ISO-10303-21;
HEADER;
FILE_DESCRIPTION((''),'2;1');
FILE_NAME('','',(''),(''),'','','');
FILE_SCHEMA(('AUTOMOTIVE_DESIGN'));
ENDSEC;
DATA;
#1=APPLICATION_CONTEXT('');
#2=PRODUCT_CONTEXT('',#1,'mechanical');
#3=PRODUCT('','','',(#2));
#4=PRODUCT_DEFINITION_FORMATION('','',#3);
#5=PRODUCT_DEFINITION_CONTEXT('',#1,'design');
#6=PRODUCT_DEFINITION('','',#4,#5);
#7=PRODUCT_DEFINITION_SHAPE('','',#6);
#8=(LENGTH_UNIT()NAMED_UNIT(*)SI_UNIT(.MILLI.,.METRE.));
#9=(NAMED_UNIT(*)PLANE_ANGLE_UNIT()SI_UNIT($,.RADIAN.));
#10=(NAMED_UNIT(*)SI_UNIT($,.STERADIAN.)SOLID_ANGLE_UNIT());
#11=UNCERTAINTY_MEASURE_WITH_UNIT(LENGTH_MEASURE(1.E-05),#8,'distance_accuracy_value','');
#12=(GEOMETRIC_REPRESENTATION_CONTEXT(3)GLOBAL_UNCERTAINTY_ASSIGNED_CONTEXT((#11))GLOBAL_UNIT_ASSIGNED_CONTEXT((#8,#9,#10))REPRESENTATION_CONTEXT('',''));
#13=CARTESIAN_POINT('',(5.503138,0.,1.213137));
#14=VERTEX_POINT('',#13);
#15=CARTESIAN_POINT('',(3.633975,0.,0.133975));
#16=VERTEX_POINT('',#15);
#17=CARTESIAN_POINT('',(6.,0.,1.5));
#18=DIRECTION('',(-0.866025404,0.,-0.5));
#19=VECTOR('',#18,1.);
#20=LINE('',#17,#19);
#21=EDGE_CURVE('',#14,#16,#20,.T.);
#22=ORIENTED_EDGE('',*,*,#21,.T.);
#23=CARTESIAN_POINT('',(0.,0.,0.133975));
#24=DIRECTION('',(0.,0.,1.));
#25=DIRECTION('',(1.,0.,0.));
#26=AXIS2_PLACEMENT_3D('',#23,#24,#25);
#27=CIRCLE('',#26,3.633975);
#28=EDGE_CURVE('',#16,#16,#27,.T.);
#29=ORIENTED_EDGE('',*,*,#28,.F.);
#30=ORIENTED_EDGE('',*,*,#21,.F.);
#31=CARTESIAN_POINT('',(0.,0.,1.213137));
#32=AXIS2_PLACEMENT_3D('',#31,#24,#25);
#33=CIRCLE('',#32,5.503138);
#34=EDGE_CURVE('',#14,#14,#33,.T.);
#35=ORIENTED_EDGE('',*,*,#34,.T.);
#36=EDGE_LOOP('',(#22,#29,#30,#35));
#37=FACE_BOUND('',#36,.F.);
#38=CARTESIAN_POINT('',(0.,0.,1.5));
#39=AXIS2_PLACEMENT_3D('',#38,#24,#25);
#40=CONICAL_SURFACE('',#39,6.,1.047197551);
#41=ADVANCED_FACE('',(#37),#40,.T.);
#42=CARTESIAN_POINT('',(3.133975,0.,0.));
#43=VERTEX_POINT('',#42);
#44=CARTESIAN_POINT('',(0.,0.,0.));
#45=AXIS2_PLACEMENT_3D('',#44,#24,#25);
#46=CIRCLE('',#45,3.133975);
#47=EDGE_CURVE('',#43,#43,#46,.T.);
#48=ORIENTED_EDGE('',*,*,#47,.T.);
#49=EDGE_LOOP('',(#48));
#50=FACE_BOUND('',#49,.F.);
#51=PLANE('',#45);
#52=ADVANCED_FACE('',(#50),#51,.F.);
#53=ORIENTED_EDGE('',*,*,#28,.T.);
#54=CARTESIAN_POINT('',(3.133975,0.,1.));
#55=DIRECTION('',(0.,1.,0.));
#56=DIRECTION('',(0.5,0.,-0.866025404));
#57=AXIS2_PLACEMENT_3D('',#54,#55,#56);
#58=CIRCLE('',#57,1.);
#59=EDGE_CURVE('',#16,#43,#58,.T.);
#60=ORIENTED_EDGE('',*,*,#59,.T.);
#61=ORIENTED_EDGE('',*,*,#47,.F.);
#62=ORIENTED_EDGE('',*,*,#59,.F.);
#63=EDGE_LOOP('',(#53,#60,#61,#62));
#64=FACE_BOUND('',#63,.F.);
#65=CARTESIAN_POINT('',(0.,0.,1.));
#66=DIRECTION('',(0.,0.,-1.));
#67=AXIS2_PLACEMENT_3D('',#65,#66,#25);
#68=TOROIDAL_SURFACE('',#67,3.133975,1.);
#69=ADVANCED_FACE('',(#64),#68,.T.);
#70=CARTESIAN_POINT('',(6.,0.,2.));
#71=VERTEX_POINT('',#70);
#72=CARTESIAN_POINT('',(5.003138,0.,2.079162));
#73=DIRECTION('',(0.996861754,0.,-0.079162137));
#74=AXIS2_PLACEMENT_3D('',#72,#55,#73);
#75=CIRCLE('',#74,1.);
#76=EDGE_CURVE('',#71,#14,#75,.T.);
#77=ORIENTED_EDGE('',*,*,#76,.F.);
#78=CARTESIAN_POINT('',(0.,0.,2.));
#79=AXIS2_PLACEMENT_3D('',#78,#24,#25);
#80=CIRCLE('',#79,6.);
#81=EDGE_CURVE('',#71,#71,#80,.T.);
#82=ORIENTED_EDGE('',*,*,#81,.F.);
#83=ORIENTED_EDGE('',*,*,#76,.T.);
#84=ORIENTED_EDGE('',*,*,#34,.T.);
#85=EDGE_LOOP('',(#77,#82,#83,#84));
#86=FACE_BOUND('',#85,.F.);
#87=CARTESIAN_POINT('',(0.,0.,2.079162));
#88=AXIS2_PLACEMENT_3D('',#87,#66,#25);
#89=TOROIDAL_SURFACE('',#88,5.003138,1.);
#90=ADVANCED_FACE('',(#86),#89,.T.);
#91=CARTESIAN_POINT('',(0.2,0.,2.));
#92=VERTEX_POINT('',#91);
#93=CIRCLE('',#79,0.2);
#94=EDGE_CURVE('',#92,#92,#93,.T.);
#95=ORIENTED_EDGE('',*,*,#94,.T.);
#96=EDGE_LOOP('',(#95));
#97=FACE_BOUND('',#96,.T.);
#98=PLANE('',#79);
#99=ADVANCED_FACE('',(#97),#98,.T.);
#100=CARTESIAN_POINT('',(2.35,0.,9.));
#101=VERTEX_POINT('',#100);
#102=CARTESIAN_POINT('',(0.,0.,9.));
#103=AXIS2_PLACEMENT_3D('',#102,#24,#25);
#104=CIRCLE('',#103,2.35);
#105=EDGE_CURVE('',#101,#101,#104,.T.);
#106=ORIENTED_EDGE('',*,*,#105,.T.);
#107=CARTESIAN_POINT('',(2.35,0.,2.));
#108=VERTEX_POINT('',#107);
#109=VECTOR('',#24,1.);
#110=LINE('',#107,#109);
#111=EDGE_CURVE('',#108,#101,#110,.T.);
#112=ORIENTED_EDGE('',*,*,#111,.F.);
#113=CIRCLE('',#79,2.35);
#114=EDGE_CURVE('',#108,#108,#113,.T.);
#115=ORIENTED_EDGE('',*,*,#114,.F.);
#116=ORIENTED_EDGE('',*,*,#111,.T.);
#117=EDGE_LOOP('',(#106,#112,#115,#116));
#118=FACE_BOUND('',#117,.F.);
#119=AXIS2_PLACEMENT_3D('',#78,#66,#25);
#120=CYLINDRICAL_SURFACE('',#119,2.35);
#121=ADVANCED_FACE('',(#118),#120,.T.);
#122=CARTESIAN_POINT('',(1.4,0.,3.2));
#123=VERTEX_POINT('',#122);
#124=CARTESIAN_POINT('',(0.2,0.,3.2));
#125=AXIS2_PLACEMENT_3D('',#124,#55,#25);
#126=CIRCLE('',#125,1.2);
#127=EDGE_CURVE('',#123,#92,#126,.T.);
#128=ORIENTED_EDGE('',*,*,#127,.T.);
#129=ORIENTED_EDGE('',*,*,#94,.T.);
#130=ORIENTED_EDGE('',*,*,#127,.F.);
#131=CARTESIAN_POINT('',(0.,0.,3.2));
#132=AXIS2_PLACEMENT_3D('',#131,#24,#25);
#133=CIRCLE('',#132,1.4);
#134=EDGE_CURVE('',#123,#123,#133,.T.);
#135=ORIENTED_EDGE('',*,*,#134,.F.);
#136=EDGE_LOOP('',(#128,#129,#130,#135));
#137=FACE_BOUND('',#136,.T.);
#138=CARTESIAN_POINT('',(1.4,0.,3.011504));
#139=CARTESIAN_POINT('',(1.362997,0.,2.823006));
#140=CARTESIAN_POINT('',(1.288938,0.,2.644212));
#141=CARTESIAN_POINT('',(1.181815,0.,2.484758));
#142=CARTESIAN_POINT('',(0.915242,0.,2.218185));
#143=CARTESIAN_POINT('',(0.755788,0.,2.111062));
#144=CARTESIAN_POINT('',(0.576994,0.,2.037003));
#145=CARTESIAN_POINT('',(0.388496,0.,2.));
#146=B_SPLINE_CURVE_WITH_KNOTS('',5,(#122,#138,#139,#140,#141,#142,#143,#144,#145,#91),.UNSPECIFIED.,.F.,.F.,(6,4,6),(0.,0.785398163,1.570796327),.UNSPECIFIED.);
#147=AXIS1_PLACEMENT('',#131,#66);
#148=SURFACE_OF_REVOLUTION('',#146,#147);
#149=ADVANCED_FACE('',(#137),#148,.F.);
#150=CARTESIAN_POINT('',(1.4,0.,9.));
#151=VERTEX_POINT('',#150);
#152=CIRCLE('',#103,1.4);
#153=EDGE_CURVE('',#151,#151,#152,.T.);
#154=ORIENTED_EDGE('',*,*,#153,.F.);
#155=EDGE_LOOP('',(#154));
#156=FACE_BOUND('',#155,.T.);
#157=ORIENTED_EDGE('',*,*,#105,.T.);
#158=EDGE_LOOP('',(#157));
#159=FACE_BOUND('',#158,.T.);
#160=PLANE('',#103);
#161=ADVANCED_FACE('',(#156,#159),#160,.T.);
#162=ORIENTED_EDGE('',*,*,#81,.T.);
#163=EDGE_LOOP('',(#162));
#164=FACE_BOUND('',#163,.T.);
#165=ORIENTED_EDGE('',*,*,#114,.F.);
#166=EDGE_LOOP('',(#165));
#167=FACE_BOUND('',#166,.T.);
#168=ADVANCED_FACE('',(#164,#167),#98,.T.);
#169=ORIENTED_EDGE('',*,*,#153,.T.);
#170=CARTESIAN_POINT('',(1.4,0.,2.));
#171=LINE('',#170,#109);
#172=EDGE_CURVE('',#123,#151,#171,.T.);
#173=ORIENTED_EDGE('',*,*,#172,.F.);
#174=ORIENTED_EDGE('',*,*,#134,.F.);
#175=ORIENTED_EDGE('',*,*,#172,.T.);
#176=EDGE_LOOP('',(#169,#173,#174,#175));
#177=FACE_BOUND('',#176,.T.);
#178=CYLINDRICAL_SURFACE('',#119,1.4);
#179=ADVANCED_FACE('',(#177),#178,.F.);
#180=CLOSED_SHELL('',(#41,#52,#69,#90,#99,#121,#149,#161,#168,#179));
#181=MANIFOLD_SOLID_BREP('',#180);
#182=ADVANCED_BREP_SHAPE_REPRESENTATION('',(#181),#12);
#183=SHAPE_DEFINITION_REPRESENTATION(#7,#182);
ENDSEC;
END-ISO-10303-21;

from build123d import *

# Parameters (mm, degrees)
F0_R     = 6
F1_DEPTH = 2
F2_SIZE2 = 2.5980762114
F2_SIZE  = 1.5
F4_R     = 2.35
F4_R_2   = 1.4
F5_DEPTH = 7
F6_R     = 1.2


# Not quite as in the source:
# - a fillet or chamfer that OpenCascade refuses, or shapes differently, is made with other operations: its cross-section is extruded or revolved along the edge and cut away or added


with BuildPart() as f1:
    # F0 (on Top) → F1 (new body)
    with BuildSketch(Plane.XY):
        Circle(F0_R)
    extrude(amount=F1_DEPTH)

    # F2
    f2_edges = [f1.edges().sort_by_distance(p)[0] for p in [
        (-6, 0, 0),
    ]]
    f2_side = f1.faces().sort_by_distance((-6, 0, 1))[0]
    chamfer(f2_edges, length=F2_SIZE, length2=F2_SIZE2, reference=f2_side)

    # F3: fillet of radius 1 on 2 edges, made by hand

    # F3_s1 → F3_t2 (revolve, cut)
    with BuildSketch(Plane.XZ):
        with BuildLine():
            ThreePointArc((3.6339745962, 0.1339745962), (3.3927936413, 0.0340741737), (3.1339745962, 0))
            Line((3.1339745962, 0), (3.4019237886, 0))
            Line((3.4019237886, 0), (3.6339745962, 0.1339745962))
        make_face()
    revolve(axis=Axis((0, 0, 0), (0, 0, 1)), mode=Mode.SUBTRACT)

    # F3_s3 → F3_t4 (revolve, cut)
    with BuildSketch(Plane.XZ):
        with BuildLine():
            ThreePointArc((6, 2), (5.8486778537, 1.5452494356), (5.5031382462, 1.2131367327))
            Line((5.5031382462, 1.2131367327), (6, 1.5))
            Line((6, 1.5), (6, 2))
        make_face()
    revolve(axis=Axis((0, 0, 1.5), (0, 0, 1)), mode=Mode.SUBTRACT)

    # F4 (on face) → F5 (join)
    with BuildSketch(Plane.XY.offset(2)):
        Circle(F4_R)
        Circle(F4_R_2, mode=Mode.SUBTRACT)
    extrude(amount=F5_DEPTH)

    # F6
    f6_edges = [f1.edges().sort_by_distance(p)[0] for p in [
        (-1.4, 0, 2),
    ]]
    fillet(f6_edges, radius=F6_R)


solid = f1.part
